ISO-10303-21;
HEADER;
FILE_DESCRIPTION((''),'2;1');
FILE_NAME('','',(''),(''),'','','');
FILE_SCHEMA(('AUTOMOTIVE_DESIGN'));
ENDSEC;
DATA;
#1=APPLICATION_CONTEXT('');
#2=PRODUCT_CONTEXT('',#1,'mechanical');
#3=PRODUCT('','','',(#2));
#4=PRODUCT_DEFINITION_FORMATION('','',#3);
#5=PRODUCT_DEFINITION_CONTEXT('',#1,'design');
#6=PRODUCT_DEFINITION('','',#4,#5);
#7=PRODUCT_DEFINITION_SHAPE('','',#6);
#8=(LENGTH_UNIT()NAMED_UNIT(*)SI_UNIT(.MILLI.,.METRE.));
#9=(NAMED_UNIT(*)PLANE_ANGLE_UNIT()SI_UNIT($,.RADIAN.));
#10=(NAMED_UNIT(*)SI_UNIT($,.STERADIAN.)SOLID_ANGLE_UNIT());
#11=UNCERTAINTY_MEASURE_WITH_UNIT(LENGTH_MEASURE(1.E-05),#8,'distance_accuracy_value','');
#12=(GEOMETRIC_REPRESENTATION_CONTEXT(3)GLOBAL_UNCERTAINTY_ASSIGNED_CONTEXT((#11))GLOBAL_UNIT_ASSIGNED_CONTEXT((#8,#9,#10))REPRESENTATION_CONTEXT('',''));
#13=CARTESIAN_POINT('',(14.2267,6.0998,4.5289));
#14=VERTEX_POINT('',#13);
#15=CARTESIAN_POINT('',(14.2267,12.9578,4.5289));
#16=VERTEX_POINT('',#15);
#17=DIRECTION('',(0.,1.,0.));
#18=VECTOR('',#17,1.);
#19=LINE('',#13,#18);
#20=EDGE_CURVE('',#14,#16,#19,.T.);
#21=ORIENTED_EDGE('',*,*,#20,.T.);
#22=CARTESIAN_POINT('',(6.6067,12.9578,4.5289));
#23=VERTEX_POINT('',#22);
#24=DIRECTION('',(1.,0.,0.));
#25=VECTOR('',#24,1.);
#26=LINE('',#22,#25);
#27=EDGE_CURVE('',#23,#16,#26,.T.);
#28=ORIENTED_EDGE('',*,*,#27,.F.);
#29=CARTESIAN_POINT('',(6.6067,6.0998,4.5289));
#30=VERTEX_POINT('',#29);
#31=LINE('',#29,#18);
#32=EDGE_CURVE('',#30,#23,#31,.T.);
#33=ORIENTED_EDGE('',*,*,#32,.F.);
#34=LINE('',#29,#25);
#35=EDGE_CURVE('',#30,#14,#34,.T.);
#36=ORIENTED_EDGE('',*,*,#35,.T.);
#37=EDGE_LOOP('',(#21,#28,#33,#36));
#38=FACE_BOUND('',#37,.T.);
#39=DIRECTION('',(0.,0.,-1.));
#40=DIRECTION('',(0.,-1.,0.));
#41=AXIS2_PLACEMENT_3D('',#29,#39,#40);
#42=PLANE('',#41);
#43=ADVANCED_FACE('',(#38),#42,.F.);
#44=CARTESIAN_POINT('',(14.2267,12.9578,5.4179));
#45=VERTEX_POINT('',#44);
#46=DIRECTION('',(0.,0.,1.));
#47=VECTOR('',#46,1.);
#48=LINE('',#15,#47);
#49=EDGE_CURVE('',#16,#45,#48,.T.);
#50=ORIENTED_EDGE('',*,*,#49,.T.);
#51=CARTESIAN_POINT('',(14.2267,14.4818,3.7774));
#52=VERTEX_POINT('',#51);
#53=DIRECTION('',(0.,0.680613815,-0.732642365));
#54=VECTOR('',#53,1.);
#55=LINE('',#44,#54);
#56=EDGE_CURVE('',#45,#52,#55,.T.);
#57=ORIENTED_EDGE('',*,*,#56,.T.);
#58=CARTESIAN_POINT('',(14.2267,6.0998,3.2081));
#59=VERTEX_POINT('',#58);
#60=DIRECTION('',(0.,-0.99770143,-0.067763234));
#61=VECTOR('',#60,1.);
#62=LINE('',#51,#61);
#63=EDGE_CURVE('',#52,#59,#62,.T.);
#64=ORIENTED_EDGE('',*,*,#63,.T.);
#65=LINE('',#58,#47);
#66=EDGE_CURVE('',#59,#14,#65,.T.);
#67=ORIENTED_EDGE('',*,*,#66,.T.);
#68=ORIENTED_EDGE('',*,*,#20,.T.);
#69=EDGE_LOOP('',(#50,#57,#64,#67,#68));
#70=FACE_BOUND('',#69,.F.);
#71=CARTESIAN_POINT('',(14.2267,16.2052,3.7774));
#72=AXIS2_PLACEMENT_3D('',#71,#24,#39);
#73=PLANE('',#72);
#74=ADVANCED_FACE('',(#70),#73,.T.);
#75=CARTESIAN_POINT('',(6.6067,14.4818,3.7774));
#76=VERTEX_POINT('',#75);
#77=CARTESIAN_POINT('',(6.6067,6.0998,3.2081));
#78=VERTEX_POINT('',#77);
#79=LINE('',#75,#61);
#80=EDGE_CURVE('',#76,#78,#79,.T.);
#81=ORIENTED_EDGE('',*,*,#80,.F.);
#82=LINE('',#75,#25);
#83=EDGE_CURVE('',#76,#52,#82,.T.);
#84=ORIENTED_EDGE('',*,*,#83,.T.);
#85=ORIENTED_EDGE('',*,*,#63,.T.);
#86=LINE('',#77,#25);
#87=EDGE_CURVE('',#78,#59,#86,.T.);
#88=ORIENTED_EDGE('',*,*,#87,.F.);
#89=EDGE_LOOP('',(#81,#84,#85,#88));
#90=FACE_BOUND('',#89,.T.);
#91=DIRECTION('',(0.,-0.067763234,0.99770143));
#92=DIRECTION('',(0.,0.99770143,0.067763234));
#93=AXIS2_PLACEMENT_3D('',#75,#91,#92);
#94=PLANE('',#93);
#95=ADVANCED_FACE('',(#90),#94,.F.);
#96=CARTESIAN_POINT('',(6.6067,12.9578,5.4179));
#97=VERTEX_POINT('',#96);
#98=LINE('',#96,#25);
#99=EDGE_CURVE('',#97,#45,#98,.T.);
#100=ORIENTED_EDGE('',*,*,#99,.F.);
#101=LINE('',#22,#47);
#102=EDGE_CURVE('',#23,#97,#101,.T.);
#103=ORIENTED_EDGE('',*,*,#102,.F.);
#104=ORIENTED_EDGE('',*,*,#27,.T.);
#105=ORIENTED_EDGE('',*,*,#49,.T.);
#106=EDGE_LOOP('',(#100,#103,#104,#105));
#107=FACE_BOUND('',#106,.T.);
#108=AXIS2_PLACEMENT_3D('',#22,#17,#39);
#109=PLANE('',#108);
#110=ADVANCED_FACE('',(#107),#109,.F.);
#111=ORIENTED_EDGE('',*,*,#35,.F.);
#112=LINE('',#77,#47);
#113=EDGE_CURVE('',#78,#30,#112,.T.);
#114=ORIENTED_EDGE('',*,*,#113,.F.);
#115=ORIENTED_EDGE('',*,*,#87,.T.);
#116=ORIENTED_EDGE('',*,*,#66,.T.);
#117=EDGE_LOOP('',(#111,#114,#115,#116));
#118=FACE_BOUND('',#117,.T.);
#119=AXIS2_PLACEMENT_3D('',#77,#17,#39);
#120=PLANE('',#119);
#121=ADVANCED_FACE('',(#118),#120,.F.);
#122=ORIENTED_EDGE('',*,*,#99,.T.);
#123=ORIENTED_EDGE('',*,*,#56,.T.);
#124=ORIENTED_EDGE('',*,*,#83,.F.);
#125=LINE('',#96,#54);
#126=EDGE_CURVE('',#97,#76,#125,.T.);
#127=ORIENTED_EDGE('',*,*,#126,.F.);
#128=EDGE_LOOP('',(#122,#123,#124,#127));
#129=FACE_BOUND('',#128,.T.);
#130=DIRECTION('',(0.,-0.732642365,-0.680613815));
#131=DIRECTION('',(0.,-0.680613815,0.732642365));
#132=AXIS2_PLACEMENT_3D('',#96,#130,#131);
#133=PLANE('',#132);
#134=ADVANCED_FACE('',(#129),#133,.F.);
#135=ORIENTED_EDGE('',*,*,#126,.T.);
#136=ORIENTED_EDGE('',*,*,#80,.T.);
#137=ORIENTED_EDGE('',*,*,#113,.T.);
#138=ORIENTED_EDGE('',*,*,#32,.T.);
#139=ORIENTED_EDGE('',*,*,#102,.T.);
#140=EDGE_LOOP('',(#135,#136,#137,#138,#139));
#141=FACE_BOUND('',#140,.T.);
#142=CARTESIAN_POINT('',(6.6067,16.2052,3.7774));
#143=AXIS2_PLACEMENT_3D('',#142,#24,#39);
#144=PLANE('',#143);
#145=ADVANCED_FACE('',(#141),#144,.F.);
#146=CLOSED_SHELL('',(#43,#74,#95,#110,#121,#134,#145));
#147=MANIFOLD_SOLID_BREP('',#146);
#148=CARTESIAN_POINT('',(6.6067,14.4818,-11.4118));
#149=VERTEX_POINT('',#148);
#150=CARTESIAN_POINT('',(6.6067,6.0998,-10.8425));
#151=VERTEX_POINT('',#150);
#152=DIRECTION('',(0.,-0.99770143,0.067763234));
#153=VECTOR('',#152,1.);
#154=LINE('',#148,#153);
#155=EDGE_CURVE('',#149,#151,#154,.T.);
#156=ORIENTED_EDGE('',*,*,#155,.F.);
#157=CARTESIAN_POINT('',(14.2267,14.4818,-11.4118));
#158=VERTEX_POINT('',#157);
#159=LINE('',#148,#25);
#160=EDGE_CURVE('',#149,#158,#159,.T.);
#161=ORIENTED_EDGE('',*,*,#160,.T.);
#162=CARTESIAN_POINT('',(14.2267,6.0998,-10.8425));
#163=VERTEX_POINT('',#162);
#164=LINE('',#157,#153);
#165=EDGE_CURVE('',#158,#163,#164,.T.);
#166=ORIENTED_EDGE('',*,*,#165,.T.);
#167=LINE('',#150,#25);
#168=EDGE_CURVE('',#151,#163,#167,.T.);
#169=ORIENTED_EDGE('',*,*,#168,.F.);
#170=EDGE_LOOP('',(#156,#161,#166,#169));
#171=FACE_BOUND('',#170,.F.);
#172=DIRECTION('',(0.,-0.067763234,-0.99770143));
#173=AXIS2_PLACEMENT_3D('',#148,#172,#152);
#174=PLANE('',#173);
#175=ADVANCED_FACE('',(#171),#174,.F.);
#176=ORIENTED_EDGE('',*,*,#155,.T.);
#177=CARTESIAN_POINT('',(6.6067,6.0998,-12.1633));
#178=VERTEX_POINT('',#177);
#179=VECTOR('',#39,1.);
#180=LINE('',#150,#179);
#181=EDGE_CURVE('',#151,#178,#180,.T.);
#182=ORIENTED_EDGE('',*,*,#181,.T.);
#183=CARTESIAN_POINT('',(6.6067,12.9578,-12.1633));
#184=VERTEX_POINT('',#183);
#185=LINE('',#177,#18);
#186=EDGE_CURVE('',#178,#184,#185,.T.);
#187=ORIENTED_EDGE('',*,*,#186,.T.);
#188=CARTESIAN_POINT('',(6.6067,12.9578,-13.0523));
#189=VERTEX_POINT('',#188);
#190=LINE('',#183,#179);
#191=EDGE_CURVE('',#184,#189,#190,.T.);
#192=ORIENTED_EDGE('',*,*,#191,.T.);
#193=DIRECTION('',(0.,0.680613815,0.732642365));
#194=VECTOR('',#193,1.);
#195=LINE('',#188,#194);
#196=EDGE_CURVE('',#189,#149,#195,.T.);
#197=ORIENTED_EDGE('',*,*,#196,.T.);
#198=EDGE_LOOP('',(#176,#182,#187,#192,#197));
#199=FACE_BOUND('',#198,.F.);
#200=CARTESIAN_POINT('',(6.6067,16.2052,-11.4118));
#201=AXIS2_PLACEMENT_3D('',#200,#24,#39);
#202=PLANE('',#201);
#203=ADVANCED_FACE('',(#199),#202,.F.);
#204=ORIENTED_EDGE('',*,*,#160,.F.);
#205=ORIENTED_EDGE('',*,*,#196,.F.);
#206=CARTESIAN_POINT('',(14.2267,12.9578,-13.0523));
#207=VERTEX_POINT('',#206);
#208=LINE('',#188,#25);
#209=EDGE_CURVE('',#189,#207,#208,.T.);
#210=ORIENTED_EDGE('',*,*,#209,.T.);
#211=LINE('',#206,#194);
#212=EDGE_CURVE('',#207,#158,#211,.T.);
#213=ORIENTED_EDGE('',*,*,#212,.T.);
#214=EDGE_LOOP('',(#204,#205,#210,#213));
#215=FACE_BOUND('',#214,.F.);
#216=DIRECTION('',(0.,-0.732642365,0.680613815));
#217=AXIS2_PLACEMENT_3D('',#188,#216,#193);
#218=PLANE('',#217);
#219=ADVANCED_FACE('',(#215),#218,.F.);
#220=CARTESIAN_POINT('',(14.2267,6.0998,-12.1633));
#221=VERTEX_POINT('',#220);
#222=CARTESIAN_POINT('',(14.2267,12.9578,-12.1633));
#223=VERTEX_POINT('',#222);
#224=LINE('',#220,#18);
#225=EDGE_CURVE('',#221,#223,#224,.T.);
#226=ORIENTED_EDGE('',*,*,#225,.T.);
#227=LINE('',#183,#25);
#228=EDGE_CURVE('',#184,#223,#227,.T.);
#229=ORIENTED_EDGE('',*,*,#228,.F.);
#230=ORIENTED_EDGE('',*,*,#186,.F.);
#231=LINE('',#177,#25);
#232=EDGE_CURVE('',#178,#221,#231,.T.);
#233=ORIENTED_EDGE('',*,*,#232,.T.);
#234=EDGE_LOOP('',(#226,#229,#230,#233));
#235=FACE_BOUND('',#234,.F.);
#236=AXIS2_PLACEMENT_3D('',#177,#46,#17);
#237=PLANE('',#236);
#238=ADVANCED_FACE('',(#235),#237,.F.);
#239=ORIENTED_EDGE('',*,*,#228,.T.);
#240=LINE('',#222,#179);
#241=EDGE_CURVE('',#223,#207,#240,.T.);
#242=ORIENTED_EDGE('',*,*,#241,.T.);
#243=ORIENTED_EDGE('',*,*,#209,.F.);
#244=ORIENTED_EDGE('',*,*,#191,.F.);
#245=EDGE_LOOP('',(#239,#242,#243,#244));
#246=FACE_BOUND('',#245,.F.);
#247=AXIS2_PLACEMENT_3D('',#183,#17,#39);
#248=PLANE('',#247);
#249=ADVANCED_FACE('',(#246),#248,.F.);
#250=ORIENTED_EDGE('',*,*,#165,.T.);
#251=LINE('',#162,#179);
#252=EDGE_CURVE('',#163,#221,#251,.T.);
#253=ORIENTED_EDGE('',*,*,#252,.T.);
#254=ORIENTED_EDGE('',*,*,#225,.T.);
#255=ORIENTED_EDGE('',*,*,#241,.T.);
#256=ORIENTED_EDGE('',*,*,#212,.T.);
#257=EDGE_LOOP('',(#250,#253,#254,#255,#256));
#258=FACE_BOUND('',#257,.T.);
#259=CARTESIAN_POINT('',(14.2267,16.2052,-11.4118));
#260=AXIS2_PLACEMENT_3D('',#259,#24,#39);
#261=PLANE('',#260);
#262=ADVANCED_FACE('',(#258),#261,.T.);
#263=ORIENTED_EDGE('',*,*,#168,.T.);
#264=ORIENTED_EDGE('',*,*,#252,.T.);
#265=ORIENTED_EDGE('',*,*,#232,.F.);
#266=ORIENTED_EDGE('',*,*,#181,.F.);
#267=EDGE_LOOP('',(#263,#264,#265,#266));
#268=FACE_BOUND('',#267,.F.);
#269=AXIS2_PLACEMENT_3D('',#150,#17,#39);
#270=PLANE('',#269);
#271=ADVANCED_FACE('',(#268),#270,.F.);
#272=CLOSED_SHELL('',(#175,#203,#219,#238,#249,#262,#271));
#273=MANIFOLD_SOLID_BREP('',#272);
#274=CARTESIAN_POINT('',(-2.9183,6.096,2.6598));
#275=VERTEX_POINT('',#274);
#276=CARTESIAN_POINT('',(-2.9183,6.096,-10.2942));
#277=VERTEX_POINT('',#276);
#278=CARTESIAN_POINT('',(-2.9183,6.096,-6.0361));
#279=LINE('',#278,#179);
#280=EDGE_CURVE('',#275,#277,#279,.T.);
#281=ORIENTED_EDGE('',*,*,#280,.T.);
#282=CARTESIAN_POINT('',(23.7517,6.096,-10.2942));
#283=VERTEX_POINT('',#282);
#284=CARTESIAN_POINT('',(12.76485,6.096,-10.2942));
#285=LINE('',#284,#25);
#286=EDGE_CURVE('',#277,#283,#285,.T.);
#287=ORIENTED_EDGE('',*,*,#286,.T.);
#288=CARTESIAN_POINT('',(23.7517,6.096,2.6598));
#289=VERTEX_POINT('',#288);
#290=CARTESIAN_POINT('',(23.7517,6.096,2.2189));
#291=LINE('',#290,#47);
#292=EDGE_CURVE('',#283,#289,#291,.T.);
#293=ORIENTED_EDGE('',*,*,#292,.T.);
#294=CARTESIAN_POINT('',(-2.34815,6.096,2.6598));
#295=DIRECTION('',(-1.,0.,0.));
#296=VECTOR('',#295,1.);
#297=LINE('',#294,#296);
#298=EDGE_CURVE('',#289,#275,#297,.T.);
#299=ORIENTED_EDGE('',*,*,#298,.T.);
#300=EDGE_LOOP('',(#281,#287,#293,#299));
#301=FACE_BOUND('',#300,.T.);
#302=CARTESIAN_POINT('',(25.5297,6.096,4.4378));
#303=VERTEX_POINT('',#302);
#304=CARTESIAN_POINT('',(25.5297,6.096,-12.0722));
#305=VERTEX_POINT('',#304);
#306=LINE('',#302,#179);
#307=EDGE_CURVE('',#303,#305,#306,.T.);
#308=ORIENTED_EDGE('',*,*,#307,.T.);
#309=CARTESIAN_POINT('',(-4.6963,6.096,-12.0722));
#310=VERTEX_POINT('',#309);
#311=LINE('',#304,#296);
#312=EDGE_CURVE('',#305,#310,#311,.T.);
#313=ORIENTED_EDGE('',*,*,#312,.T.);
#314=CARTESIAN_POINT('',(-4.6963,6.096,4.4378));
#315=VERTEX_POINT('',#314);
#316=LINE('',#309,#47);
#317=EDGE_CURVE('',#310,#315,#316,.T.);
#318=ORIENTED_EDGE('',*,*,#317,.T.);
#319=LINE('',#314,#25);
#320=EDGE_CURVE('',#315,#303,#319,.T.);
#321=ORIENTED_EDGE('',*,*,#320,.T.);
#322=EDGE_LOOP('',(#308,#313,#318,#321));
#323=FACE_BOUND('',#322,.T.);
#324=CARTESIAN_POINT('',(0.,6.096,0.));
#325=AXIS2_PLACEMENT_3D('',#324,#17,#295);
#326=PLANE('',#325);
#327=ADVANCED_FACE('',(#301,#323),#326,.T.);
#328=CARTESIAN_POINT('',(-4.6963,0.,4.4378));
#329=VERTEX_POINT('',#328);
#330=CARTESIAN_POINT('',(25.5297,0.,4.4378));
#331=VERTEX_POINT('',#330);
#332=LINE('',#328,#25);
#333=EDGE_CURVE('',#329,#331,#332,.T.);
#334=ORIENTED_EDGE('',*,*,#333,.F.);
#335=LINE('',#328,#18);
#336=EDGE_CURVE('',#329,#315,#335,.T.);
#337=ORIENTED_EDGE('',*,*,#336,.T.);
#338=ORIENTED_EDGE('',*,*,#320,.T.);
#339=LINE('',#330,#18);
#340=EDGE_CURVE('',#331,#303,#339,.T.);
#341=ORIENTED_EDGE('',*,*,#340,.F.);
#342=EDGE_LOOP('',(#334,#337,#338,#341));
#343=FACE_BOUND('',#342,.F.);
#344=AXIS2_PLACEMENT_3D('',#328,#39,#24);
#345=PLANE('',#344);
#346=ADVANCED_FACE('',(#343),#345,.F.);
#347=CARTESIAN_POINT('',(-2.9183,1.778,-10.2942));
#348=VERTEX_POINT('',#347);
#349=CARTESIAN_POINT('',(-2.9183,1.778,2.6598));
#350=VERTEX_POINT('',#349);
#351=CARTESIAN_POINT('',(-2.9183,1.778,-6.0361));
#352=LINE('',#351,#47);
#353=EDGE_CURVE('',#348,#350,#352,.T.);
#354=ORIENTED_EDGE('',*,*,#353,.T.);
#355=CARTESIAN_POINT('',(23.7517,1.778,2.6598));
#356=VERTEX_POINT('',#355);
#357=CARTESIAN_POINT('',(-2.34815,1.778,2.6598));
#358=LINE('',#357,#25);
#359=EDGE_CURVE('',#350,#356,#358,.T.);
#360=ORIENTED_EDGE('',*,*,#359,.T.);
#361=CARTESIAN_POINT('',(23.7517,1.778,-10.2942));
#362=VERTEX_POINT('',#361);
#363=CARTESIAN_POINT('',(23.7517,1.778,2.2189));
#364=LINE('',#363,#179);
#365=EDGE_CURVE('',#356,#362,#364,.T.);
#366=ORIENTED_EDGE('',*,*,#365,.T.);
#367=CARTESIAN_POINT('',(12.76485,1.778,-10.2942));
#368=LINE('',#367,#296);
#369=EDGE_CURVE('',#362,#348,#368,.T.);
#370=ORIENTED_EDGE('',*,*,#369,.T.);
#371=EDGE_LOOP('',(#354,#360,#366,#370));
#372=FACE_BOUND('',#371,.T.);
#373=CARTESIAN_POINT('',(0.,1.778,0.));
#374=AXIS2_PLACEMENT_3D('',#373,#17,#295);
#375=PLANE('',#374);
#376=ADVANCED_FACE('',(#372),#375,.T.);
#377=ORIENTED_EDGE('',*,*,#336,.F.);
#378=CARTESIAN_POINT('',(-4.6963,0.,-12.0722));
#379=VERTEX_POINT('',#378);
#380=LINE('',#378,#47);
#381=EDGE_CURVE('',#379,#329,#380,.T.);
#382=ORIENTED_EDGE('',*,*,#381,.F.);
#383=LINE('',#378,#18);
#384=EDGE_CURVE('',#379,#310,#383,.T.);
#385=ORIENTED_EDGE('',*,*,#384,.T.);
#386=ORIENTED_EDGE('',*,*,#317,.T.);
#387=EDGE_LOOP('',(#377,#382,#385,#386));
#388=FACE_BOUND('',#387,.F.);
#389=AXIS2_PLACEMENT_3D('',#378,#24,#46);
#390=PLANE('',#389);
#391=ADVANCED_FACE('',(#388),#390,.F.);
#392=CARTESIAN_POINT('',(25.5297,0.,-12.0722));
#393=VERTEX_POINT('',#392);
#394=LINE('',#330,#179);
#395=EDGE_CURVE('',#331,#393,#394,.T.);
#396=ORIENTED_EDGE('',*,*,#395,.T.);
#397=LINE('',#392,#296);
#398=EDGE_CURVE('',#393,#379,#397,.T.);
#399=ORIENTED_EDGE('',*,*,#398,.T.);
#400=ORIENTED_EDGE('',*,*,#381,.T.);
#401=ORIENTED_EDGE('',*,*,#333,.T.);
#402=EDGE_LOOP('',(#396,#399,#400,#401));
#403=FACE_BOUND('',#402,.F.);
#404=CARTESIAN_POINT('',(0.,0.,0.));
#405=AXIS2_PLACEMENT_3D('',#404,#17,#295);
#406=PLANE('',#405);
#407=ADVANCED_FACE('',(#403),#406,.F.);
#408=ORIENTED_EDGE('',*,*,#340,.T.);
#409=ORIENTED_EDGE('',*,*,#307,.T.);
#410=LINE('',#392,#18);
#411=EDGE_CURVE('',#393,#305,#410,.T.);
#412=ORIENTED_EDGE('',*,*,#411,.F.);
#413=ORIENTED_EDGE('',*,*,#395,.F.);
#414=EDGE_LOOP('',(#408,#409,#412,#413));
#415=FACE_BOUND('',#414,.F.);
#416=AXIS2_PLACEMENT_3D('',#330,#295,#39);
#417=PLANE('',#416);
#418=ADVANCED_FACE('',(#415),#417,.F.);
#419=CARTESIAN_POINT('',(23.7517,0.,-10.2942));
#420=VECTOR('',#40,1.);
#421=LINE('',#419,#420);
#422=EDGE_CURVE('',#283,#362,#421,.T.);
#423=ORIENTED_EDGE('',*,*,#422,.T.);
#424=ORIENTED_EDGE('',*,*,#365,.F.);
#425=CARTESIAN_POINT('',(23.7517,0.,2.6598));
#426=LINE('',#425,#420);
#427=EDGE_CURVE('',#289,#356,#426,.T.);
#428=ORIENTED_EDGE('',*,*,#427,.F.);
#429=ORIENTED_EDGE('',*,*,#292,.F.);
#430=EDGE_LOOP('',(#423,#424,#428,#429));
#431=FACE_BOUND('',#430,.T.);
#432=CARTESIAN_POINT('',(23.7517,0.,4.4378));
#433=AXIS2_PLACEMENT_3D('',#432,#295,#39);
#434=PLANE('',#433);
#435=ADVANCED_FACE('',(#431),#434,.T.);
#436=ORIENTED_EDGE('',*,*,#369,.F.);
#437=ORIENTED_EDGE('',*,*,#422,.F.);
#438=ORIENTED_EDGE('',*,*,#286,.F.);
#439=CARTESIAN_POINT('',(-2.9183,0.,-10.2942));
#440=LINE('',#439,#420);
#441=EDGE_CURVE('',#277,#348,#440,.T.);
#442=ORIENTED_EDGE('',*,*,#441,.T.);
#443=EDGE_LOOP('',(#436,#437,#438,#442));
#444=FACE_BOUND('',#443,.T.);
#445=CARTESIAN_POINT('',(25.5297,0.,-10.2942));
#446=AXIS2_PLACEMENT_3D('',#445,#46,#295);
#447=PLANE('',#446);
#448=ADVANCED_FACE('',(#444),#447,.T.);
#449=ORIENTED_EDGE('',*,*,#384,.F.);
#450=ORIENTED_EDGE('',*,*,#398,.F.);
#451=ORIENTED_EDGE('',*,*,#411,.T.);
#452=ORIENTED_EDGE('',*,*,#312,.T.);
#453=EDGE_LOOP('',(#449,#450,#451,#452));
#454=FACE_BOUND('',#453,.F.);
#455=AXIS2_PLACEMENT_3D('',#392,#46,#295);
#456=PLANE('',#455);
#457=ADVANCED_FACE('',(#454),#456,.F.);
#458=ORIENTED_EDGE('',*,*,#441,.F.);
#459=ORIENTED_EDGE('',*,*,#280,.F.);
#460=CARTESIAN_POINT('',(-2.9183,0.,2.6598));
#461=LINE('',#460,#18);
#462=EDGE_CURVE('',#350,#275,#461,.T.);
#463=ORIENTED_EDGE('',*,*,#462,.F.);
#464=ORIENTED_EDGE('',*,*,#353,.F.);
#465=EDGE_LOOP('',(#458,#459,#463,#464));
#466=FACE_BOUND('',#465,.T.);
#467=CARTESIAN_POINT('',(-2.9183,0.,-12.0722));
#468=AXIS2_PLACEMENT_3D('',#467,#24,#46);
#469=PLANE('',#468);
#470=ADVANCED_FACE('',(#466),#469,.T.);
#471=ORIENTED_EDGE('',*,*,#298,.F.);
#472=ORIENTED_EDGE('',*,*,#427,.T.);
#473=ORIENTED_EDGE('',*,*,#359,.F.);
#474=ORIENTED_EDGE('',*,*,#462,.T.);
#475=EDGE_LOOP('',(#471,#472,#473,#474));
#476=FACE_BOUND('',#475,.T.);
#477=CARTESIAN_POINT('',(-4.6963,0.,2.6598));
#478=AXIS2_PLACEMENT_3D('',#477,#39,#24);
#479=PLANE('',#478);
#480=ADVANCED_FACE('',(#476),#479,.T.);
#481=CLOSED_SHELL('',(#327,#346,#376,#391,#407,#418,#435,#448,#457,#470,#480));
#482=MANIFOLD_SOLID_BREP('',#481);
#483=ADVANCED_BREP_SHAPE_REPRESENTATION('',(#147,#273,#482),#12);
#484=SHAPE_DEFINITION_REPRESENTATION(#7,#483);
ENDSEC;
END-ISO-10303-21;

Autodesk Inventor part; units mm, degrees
ref_plane "YZ Plane" through (0, 0, 0) normal (1, 0, 0) x (0, 1, 0)
ref_plane "XZ Plane" through (0, 0, 0) normal (0, 1, 0) x (-1, 0, 0)
ref_plane "XY Plane" through (0, 0, 0) normal (0, 0, 1) x (1, 0, 0)
sketch "Sketch1" plane through (0, 0, 0) normal (0, 1, 0) x (-1, 0, 0)
  line L0 (4.6963, 4.4378) -> (-25.5297, 4.4378)
  line L1 (-25.5297, 4.4378) -> (-25.5297, -12.0722)
  line L2 (-25.5297, -12.0722) -> (4.6963, -12.0722)
  line L3 (4.6963, -12.0722) -> (4.6963, 4.4378)
  point P0 (0, 0)
  dimension "d0" = 30.226
  dimension "d1" = 16.51
extrude "Extrusion1" add sketch "Sketch1" along normal blind 6.096
shell "Shell1" thickness 1.778 removed faces 1 at (15.4543, 6.096, -1.0655)
sketch "Sketch2" plane through (25.5297, 0, 4.4378) normal (1, 0, 0) x (0, 0, -1)
  line L0 (0, -1.7234) -> (-0.5693, -10.1054)
  line L1 (0, -1.7234) -> (8.382, -1.7234) construction
  line L2 (-0.5693, -10.1054) -> (0.7515, -10.1054)
  line L3 (0.7515, -10.1054) -> (0.7515, -3.2474)
  line L4 (0.7515, -3.2474) -> (1.6405, -3.2474)
  line L5 (1.6405, -3.2474) -> (0, -1.7234)
  point P0 (4.4378, 0)
  dimension "d5" = 8.4013
  dimension "d6" = 93.886
  dimension "d7" = 1.3208
  dimension "d8" = 6.858
  dimension "d9" = 0.889
extrude "Extrusion3" add sketch "Sketch2" along normal blind 7.62 separate body
move or copy body "Move Body5" bodies to move or copy 2 copy no translate (-18.923, 16.2052, -15.8496)
ref_plane "Work Plane1" through (-4.6963, 0, -3.8172) normal (0, 0, 1) x (1, 0, 0)
mirror "Mirror1" about plane through (-4.6963, 0, -3.8172) normal (0, 0, 1) bodies 2
combine bodies "Combine1" operation type add bodies to combine 2 1
properties part number "ptt-button"
